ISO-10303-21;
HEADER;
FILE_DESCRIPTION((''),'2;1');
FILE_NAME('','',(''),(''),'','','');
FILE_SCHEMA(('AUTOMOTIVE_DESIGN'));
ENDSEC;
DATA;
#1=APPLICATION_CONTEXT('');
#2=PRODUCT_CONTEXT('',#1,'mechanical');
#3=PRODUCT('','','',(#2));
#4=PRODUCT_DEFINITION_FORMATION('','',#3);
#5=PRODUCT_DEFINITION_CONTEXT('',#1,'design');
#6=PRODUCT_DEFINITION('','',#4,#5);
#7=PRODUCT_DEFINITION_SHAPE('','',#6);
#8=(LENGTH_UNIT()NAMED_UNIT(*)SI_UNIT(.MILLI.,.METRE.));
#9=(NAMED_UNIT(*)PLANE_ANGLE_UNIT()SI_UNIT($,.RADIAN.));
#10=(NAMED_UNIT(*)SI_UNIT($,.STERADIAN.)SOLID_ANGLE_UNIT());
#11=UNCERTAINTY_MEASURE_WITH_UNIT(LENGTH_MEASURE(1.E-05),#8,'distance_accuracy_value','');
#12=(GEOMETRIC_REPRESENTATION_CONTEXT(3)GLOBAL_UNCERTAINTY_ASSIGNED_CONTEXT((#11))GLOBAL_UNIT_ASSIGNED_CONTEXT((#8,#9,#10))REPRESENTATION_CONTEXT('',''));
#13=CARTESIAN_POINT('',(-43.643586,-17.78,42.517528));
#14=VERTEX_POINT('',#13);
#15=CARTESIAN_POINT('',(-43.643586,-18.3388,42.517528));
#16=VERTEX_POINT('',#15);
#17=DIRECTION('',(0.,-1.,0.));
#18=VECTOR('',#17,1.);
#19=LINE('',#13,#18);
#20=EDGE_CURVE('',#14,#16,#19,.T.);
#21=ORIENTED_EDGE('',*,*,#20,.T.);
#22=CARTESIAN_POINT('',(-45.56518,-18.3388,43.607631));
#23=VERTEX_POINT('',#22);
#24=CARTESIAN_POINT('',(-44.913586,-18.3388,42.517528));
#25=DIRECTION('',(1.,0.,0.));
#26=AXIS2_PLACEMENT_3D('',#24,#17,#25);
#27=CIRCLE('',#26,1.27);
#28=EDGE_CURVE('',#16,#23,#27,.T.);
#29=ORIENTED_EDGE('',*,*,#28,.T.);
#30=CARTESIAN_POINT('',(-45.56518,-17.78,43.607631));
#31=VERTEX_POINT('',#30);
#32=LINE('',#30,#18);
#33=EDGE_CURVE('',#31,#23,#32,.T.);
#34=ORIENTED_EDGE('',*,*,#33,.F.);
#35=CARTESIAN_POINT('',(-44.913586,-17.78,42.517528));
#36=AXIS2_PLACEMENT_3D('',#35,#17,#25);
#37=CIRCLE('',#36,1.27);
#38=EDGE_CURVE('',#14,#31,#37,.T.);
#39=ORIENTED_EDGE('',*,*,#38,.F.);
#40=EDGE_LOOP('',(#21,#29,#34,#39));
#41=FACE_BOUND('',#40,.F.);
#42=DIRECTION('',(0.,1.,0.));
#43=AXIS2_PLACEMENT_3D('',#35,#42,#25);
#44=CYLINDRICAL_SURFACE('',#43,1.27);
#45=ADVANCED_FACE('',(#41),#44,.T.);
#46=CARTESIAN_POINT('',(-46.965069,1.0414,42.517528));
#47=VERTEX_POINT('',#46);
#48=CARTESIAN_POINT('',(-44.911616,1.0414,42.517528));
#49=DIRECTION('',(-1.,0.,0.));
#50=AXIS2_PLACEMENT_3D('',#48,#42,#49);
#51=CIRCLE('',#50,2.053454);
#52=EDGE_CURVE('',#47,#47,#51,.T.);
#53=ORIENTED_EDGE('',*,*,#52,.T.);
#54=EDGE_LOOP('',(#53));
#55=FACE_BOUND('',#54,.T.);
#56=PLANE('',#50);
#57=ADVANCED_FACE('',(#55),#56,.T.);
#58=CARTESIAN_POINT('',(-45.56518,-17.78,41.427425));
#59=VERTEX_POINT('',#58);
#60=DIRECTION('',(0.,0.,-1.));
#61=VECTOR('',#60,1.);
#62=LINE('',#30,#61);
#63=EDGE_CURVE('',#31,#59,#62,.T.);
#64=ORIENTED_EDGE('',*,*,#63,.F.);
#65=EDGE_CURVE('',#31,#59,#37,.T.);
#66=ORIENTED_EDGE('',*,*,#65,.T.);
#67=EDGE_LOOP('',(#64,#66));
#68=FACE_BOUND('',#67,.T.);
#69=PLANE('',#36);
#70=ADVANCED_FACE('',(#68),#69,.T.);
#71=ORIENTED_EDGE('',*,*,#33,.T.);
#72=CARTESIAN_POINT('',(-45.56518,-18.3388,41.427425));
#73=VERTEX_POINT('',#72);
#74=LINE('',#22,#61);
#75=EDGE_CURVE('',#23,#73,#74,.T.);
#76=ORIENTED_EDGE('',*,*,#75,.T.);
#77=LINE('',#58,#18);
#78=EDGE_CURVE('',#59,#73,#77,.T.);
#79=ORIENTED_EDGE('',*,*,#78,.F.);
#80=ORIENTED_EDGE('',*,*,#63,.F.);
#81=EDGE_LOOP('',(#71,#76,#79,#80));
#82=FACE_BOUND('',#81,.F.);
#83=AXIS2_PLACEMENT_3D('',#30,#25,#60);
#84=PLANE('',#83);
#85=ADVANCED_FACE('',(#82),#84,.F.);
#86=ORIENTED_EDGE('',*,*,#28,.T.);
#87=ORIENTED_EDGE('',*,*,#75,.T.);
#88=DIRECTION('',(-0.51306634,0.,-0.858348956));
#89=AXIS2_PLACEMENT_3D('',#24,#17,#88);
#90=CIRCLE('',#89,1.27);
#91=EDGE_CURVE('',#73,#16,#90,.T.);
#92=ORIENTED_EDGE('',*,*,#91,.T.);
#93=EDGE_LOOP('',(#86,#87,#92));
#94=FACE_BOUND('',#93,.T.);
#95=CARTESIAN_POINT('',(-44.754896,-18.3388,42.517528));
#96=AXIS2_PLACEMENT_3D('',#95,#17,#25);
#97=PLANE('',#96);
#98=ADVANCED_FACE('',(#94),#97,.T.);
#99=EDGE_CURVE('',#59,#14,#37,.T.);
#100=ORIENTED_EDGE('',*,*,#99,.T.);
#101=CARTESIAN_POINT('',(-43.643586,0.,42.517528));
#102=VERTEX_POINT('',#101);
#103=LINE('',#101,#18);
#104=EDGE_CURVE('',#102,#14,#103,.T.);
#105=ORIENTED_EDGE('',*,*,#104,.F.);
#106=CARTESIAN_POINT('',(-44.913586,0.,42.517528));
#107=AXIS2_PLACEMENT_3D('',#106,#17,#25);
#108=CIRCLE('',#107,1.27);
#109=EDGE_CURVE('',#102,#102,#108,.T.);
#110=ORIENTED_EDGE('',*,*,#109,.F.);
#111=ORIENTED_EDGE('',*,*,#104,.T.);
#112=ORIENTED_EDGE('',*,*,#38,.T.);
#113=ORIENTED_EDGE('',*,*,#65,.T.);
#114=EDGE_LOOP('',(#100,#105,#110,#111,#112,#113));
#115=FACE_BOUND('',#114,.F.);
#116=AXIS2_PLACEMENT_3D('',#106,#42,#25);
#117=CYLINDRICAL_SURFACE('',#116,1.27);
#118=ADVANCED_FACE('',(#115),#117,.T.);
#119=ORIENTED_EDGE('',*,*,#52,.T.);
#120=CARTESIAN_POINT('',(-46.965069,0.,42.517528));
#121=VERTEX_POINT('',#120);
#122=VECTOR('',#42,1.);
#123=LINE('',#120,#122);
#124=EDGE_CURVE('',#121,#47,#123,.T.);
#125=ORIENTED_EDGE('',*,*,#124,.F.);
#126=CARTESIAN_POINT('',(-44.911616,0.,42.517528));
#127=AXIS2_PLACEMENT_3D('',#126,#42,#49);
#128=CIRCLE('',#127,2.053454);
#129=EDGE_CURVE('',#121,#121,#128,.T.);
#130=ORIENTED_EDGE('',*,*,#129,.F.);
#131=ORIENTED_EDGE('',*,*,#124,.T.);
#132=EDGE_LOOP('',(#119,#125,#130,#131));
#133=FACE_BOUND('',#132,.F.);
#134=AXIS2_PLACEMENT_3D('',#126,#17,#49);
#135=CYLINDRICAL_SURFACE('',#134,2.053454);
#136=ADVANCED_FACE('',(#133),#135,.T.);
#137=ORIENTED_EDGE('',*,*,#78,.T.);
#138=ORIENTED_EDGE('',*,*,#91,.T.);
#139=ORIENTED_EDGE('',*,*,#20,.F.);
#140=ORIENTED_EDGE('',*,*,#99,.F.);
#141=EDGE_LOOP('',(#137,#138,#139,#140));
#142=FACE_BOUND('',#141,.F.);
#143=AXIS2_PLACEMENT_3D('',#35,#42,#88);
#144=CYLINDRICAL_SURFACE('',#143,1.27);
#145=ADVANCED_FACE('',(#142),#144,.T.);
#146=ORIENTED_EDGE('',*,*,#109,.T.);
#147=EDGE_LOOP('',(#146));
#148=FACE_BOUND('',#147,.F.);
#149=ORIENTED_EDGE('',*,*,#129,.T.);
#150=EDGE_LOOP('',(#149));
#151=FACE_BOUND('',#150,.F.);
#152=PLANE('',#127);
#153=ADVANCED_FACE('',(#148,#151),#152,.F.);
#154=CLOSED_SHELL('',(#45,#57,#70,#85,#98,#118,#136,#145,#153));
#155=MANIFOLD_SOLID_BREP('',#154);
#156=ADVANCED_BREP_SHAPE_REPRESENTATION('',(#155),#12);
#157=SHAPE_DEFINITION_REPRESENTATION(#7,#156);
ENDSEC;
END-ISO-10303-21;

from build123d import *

# Parameters (mm, degrees)
F0_R     = 1.27
F1_DEPTH = 17.78
F2_R     = 2.0534537801
F3_DEPTH = 1.0414
F5_DEPTH = 0.5588


with BuildPart() as f1:
    # F0 (on Front) → F1 (new body)
    with BuildSketch(Plane.XZ):
        with Locations((-44.9135862291, 42.5175279379)):
            Circle(F0_R)
    extrude(amount=F1_DEPTH)

    # F2 (on face) → F3 (join)
    with BuildSketch(Plane(origin=(0, 0, 0), x_dir=(-1, 0, 0), z_dir=(0, 1, 0))):
        with Locations((44.9116155505, 42.5175279379)):
            Circle(F2_R)
        with BuildLine():
            ThreePointArc((44.2763268948, 41.4189832001), (43.6435862291, 42.5175279379), (44.2763268948, 43.6160726756))
            ThreePointArc((44.2763268948, 43.6160726756), (44.9113103393, 43.7875258986), (45.5469042063, 43.6183496036))
            ThreePointArc((45.5469042063, 43.6183496036), (46.0129528265, 43.1533683931), (46.1835862291, 42.5175279379))
            ThreePointArc((46.1835862291, 42.5175279379), (45.5474555553, 41.4170236547), (44.2763268948, 41.4189832001))
        make_face(mode=Mode.SUBTRACT)
        Polygon((44.2763268948, 43.6160726756), (44.2763268948, 42.5175279379), (44.2763268948, 41.4189832001), (45.5469042063, 41.4189832001), (45.5469042063, 43.6183496036), align=None)
        with BuildLine():
            Line((45.5469042063, 41.4189832001), (44.2763268948, 41.4189832001))
            ThreePointArc((44.2763268948, 41.4189832001), (45.5474555553, 41.4170236547), (46.1835862291, 42.5175279379))
            ThreePointArc((46.1835862291, 42.5175279379), (46.0129528265, 43.1533683931), (45.5469042063, 43.6183496036))
            Line((45.5469042063, 43.6183496036), (45.5469042063, 41.4189832001))
        make_face()
        with BuildLine():
            Line((44.2763268948, 41.4189832001), (44.2763268948, 42.5175279379))
            Line((44.2763268948, 42.5175279379), (44.2763268948, 43.6160726756))
            ThreePointArc((44.2763268948, 43.6160726756), (43.6435862291, 42.5175279379), (44.2763268948, 41.4189832001))
        make_face()
        with BuildLine():
            ThreePointArc((45.5469042063, 43.6183496036), (44.9113103393, 43.7875258986), (44.2763268948, 43.6160726756))
            Line((44.2763268948, 43.6160726756), (45.5469042063, 43.6183496036))
        make_face()
    extrude(amount=F3_DEPTH)

    # F4 (on face) → F5 (join)
    with BuildSketch(Plane.XZ.offset(17.78)):
        with BuildLine():
            Line((-45.5651804805, 43.6076311126), (-45.5651804805, 42.5175279379))
            Line((-45.5651804805, 42.5175279379), (-45.5651804805, 41.4274247632))
            ThreePointArc((-45.5651804805, 41.4274247632), (-44.2869382814, 41.4128957142), (-43.6435862291, 42.5175279379))
            ThreePointArc((-43.6435862291, 42.5175279379), (-44.2869382814, 43.6221601616), (-45.5651804805, 43.6076311126))
        make_face()
    extrude(amount=F5_DEPTH)


solid = f1.part
